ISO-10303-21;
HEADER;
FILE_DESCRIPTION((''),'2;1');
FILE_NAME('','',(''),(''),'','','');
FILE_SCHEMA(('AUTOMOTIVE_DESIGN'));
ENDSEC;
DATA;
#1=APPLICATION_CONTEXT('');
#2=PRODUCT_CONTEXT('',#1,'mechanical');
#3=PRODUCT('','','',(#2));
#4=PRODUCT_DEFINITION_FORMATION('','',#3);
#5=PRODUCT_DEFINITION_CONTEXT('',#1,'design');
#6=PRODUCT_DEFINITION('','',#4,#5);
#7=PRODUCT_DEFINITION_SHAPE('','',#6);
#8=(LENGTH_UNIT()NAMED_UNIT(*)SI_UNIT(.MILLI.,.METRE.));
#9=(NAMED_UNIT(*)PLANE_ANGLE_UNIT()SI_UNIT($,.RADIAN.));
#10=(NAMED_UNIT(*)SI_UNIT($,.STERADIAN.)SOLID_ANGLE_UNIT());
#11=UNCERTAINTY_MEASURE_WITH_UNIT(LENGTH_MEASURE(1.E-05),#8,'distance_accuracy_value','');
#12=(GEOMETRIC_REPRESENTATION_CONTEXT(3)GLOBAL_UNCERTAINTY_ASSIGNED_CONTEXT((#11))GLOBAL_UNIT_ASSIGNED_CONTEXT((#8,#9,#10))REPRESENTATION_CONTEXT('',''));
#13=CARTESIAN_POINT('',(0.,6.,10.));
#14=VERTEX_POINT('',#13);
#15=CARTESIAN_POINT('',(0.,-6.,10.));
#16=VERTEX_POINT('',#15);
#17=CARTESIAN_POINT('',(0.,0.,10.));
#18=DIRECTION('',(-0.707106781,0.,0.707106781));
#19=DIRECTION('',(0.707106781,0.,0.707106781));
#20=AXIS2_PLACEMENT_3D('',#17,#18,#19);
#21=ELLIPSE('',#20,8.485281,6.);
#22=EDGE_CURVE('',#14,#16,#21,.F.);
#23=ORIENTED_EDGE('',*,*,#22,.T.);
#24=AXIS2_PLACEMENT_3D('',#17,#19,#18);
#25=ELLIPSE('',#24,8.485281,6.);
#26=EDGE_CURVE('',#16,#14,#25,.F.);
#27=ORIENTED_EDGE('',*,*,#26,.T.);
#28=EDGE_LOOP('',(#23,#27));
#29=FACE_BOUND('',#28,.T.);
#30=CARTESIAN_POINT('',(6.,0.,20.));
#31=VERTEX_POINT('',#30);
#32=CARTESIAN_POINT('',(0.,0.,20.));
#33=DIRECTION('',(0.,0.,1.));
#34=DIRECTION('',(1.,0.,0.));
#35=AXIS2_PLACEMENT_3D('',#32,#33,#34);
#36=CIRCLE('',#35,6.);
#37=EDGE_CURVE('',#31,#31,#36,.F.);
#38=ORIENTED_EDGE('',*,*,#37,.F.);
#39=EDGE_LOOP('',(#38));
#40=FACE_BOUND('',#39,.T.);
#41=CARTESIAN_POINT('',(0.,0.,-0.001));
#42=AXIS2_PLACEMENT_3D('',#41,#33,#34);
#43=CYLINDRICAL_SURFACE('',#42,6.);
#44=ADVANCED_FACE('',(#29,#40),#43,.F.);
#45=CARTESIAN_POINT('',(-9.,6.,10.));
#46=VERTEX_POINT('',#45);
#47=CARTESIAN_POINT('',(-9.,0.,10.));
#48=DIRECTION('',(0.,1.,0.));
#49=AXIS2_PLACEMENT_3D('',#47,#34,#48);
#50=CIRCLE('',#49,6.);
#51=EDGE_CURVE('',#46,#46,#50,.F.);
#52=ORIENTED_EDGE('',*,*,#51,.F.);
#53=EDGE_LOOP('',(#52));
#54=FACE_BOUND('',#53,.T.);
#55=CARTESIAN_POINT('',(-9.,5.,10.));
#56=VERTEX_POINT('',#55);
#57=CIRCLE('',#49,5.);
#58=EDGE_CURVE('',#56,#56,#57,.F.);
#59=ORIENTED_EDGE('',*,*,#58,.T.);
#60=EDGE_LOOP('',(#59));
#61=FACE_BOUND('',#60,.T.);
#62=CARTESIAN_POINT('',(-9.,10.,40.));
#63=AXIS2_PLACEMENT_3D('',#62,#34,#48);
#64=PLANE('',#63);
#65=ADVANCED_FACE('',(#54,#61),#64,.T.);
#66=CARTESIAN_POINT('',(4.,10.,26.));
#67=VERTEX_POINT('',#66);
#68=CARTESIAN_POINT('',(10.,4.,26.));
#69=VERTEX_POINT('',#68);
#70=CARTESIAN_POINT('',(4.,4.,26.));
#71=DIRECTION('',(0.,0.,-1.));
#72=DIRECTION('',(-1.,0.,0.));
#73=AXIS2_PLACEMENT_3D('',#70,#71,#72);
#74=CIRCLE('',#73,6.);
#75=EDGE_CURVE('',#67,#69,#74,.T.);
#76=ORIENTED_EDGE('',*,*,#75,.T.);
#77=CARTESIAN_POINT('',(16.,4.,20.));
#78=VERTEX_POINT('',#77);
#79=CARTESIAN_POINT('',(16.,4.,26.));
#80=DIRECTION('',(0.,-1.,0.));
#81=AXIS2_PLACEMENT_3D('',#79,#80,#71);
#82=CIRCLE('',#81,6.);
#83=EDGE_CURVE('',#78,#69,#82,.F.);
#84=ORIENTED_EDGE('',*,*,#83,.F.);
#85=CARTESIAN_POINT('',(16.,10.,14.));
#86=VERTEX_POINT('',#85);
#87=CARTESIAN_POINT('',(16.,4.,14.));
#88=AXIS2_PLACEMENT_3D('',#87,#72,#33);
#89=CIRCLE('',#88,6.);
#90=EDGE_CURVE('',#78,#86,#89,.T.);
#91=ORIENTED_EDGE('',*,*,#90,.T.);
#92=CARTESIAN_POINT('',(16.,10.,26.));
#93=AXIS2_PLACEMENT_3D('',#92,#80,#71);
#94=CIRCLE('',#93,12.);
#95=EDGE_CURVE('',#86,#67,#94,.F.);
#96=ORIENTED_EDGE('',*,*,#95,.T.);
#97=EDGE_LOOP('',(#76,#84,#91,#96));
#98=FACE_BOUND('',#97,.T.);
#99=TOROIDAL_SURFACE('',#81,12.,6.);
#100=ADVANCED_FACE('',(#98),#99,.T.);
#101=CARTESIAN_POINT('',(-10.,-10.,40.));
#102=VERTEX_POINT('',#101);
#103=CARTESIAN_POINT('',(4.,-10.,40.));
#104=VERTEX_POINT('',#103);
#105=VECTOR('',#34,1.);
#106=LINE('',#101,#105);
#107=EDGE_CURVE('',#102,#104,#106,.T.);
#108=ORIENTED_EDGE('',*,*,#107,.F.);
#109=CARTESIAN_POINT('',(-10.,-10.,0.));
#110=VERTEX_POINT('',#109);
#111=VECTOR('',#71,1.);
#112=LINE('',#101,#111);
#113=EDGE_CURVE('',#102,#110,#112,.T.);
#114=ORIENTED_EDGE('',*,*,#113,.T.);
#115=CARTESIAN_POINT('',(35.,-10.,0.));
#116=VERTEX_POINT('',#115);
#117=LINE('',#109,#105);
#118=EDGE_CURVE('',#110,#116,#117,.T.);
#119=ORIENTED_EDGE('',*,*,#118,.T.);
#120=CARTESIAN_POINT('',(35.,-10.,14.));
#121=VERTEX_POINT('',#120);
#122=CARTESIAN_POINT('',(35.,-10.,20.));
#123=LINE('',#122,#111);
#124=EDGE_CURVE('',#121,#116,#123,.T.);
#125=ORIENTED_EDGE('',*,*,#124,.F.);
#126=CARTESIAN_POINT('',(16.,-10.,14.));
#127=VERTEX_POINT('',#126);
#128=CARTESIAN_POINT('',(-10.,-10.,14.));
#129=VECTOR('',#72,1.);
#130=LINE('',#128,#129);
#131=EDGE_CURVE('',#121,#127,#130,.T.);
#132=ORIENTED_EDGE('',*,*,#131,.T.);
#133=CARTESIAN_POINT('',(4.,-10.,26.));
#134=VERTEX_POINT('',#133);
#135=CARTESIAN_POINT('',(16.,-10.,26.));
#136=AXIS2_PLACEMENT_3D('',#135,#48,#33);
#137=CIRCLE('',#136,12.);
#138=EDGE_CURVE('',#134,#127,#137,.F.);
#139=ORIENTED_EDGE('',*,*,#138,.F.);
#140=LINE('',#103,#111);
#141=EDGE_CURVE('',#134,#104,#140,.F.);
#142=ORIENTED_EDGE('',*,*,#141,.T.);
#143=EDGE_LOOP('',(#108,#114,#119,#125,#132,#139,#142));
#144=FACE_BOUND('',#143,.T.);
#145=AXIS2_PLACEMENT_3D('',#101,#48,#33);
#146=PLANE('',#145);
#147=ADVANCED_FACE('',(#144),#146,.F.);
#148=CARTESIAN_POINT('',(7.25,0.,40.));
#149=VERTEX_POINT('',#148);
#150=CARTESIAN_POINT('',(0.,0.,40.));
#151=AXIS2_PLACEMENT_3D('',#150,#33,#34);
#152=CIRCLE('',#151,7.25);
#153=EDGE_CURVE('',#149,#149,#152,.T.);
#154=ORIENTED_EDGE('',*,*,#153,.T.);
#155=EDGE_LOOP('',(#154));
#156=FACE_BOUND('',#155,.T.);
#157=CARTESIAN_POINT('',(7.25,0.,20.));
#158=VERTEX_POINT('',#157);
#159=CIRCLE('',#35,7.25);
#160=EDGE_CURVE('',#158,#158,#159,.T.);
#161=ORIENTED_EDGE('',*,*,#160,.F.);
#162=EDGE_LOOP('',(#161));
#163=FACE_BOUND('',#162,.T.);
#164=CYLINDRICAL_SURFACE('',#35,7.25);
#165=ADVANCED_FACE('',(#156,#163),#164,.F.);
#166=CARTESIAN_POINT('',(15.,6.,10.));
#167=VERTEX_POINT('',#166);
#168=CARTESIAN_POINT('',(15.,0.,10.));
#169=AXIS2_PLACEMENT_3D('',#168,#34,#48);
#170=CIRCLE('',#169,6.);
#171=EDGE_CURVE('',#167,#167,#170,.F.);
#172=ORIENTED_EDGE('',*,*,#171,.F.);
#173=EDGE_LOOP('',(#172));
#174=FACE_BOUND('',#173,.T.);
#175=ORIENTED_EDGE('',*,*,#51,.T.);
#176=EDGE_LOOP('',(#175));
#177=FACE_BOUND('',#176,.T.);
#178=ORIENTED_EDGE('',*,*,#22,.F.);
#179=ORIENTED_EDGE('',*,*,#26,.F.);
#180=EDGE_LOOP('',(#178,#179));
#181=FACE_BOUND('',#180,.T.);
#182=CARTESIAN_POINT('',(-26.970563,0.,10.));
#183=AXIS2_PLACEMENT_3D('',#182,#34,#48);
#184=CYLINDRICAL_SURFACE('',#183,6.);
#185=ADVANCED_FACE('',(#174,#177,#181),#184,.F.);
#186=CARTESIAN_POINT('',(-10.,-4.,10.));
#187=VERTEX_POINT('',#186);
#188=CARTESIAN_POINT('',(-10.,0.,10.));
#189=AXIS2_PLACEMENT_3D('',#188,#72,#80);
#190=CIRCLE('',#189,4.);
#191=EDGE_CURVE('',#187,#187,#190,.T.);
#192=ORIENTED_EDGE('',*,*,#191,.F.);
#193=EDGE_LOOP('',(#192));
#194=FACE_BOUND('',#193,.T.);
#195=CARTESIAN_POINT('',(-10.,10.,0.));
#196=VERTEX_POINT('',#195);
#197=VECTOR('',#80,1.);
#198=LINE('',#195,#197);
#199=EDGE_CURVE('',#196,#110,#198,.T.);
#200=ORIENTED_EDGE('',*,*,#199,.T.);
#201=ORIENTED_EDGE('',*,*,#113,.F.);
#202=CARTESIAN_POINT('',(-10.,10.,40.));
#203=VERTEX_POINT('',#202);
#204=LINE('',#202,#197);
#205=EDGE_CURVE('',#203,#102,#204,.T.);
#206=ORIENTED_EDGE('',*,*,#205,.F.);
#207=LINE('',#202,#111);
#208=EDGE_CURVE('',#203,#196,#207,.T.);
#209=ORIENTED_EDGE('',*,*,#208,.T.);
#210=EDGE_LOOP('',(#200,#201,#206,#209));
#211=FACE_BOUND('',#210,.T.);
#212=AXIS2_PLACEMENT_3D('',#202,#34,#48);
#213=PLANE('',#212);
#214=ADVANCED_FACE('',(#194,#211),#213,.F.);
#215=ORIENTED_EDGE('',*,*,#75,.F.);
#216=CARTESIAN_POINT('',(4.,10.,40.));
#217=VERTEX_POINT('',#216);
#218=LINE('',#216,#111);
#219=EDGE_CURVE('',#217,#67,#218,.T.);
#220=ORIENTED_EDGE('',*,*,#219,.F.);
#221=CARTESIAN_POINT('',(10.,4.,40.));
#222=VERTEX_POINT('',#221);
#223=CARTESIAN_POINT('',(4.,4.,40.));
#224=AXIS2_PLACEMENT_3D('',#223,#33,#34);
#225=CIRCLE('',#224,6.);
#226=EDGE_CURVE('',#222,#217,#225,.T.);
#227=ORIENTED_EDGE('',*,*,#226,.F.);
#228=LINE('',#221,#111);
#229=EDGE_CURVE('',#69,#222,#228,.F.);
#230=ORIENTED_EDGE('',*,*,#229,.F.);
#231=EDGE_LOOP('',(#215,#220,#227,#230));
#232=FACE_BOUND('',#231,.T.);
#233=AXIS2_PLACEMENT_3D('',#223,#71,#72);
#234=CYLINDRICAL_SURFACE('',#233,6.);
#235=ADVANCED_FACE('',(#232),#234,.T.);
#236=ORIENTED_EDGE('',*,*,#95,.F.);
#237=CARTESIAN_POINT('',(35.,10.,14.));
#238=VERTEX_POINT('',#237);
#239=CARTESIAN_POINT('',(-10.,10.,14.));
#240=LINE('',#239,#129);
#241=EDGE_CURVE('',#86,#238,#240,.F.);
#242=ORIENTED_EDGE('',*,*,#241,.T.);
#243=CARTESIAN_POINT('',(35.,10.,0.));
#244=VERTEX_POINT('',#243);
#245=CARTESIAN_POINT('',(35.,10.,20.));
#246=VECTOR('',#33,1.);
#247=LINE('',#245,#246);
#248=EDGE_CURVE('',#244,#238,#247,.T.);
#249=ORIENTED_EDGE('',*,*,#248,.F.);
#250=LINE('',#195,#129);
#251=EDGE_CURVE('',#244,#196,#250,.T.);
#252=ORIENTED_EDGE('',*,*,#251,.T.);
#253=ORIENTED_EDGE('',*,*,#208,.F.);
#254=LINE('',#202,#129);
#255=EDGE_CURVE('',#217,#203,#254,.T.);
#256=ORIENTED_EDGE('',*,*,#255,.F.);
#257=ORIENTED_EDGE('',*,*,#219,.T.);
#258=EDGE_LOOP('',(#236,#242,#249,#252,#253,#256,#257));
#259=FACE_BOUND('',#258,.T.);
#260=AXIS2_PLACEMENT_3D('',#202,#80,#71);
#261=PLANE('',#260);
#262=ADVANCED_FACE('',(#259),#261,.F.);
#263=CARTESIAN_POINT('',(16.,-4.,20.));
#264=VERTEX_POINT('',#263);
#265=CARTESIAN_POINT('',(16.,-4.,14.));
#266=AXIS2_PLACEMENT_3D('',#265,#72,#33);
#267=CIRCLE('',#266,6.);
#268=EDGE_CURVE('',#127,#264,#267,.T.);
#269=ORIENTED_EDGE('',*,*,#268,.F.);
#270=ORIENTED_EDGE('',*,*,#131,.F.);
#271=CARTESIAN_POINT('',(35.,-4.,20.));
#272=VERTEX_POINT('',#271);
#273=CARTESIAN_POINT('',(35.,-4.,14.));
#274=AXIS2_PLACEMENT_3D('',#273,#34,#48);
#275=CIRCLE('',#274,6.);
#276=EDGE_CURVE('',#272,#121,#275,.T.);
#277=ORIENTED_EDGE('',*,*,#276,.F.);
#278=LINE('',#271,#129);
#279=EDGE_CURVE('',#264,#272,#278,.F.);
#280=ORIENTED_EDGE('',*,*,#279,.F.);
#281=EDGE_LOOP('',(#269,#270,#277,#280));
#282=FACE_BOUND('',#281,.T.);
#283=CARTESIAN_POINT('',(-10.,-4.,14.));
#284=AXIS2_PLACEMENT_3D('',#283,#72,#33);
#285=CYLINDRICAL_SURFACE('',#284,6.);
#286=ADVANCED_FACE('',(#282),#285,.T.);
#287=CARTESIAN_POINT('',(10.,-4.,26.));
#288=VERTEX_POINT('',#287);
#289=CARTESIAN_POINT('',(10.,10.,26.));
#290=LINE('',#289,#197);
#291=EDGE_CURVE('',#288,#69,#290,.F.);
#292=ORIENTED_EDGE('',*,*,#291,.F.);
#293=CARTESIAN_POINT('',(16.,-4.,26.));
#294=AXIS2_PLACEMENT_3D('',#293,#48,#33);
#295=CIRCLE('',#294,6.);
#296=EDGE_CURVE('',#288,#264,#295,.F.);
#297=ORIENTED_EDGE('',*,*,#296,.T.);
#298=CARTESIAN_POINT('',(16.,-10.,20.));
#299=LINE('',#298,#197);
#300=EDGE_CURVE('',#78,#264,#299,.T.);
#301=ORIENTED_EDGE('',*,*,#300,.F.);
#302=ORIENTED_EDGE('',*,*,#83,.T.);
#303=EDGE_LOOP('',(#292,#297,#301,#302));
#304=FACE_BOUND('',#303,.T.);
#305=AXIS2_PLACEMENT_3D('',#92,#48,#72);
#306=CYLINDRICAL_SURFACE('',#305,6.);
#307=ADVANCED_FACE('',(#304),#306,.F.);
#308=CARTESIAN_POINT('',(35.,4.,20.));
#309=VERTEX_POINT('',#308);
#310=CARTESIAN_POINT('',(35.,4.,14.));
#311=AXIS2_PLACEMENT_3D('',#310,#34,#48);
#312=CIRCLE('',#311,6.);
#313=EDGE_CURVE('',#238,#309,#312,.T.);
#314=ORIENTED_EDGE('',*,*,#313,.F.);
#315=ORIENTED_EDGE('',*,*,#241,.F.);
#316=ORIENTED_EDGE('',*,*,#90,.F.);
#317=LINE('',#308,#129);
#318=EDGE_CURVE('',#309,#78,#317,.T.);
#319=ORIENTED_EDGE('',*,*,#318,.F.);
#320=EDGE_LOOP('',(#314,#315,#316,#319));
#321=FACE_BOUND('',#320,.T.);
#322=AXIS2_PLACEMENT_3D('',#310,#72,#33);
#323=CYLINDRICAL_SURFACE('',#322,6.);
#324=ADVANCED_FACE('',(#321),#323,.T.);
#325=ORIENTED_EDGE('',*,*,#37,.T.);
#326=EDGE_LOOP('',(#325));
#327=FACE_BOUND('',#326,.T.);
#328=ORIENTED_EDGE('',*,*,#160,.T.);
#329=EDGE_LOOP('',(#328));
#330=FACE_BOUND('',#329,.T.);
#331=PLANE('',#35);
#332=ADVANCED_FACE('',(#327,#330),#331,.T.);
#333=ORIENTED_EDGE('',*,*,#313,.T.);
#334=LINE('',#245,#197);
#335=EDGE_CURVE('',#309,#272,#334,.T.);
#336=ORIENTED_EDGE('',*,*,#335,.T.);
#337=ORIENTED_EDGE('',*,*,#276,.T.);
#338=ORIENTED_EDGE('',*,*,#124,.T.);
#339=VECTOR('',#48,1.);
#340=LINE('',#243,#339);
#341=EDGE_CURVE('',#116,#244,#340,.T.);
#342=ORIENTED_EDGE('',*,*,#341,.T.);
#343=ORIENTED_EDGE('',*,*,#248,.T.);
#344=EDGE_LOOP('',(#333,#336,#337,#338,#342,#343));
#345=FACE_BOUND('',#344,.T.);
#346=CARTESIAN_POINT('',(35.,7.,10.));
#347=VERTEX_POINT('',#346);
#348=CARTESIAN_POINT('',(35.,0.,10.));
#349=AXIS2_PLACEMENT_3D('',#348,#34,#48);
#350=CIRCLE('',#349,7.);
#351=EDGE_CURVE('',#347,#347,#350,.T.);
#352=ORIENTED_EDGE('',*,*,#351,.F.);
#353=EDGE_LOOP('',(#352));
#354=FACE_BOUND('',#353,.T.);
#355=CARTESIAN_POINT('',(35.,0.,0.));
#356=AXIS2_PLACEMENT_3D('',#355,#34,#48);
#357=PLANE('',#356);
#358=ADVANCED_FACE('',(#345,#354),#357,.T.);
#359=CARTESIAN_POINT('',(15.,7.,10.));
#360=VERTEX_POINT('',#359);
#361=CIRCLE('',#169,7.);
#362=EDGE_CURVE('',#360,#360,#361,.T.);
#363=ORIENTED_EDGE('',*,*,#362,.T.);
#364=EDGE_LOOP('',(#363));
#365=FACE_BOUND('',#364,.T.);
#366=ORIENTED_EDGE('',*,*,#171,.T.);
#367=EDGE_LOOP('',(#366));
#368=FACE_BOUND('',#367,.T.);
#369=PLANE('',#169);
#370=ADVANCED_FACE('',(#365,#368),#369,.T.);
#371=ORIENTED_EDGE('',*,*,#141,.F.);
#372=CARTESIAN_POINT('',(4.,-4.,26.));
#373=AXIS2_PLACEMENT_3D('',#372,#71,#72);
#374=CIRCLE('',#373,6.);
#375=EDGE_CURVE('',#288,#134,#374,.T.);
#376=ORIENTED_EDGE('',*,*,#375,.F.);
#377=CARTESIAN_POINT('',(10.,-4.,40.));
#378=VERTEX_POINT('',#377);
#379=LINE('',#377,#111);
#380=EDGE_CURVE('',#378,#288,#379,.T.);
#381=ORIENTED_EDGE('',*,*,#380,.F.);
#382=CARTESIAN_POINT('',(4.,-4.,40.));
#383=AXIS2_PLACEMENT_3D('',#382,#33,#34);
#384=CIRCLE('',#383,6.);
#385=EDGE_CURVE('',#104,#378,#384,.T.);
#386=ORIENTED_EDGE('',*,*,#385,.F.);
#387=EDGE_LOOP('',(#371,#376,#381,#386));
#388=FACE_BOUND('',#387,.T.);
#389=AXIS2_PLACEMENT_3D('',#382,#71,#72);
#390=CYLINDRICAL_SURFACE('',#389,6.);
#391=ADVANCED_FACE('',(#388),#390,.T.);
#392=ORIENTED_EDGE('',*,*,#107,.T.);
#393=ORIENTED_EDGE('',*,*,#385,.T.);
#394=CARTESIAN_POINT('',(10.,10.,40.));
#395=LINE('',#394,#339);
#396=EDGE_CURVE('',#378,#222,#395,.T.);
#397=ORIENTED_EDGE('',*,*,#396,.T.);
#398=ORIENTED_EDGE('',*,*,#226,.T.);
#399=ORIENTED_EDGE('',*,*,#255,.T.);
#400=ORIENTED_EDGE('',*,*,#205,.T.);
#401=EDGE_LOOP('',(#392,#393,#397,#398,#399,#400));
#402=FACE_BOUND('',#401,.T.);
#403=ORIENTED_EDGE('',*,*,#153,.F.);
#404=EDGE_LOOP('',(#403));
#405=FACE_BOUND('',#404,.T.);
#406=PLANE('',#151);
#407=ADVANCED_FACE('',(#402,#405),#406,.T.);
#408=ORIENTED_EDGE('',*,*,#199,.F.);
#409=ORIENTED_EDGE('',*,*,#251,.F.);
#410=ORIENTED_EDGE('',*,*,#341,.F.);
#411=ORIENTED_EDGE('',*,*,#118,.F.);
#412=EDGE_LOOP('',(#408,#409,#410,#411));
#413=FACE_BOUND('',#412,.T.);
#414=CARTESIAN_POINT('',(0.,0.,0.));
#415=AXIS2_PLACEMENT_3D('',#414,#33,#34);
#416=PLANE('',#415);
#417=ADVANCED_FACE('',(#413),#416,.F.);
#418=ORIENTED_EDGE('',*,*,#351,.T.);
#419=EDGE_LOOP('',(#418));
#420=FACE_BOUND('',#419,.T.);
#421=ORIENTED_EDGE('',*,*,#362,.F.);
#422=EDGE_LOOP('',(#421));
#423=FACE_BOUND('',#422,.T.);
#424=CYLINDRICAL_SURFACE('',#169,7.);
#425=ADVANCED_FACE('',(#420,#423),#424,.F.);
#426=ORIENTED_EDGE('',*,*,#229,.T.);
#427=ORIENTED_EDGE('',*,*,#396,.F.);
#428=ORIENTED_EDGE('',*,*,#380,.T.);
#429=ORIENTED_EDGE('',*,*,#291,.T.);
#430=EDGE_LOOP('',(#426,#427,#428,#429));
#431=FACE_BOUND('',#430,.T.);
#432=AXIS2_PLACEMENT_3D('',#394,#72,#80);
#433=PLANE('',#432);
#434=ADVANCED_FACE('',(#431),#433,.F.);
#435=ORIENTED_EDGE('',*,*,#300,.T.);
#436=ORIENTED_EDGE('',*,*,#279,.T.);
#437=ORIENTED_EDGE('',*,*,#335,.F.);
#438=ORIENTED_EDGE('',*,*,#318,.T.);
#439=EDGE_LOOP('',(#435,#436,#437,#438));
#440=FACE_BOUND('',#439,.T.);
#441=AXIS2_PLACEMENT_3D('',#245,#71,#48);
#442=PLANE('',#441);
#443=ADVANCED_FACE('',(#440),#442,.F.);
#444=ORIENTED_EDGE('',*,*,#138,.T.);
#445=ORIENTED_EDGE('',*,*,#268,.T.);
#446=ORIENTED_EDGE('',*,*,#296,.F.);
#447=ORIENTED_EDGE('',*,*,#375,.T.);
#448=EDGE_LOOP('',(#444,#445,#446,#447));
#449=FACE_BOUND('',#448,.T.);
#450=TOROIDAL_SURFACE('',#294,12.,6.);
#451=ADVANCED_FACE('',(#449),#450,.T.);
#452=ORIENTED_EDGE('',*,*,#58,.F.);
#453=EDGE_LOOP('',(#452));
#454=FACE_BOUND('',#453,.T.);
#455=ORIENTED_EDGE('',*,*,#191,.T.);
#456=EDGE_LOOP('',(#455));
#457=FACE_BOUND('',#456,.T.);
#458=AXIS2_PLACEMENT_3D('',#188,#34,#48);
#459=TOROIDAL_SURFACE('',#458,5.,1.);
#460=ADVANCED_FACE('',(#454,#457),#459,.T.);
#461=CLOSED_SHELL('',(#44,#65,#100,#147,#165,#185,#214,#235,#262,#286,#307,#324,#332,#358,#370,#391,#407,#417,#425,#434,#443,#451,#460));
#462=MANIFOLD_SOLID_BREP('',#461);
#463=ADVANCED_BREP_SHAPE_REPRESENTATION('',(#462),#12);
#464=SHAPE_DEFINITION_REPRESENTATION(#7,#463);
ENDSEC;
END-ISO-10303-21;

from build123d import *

# Parameters (mm, degrees)
SKETCH_2_W                 = 20
SKETCH_2_H                 = 20
EXTRUDE_482_DEPTH          = 40
SKETCH_4_W                 = 20
SKETCH_4_H                 = 20
EXTRUDE_639_DEPTH          = 25
SKETCH_7_R                 = 6
CUT_EXTRUDE_822_DEPTH      = 44
CUT_EXTRUDE_968_REACH      = 56.083
CUT_EXTRUDE_968_END_RADIUS = 6
SKETCH_8_R                 = 6
SKETCH_9_R                 = 7.25
CUT_EXTRUDE_1104_DEPTH     = 20
SKETCH_10_R                = 7
CUT_EXTRUDE_1247_DEPTH     = 20
CUT_EXTRUDE_1380_REACH     = 63.033
SKETCH_11_R                = 4
FILLET_2_R                 = 6
FILLET_5_R                 = 1


with BuildPart() as part:
    # Эскиз2 → Extrude 482 (new body)
    with BuildSketch(Plane.XY):
        Rectangle(SKETCH_2_W, SKETCH_2_H)
    extrude(amount=EXTRUDE_482_DEPTH)

    # Эскиз4 → Extrude 639 (add)
    with BuildSketch(Plane(origin=(10, 0, 0), x_dir=(0, 0, -1), z_dir=(1, 0, 0))):
        with Locations((-10, 0)):
            Rectangle(SKETCH_4_W, SKETCH_4_H)
    extrude(amount=EXTRUDE_639_DEPTH)

    # Эскиз7 → Cut-Extrude 822 (cut)
    with BuildSketch(Plane(origin=(35, 0, 0), x_dir=(0, 0, -1), z_dir=(1, 0, 0))):
        with Locations(Location((-10, 0, 0), (0, 0, 90))):
            Circle(SKETCH_7_R)
    extrude(amount=-CUT_EXTRUDE_822_DEPTH, mode=Mode.SUBTRACT)

    # Cut-Extrude 968: up to this cylinder (the profile starts outside it)
    cut_extrude_968_end = Plane(origin=(0, 0, 10), z_dir=(1, 0, 0)) * Cylinder(CUT_EXTRUDE_968_END_RADIUS, 125.166, mode=Mode.PRIVATE)
    # Эскиз8 → Cut-Extrude 968 (cut, up to the surface)
    with BuildSketch(Plane.XY.offset(40), mode=Mode.PRIVATE) as cut_extrude_968_sk1:
        Circle(SKETCH_8_R)
    cut_extrude_968_tool1 = extrude(cut_extrude_968_sk1.sketch, amount=-CUT_EXTRUDE_968_REACH, mode=Mode.PRIVATE) - cut_extrude_968_end
    add(cut_extrude_968_tool1.solids().sort_by_distance((0, 0, 40))[0], mode=Mode.SUBTRACT)

    # Эскиз9 → Cut-Extrude 1104 (cut)
    with BuildSketch(Plane.XY.offset(40)):
        Circle(SKETCH_9_R)
    extrude(amount=-CUT_EXTRUDE_1104_DEPTH, mode=Mode.SUBTRACT)

    # Эскиз10 → Cut-Extrude 1247 (cut)
    with BuildSketch(Plane(origin=(35, 0, 0), x_dir=(0, 0, -1), z_dir=(1, 0, 0))):
        with Locations(Location((-10, 0, 0), (0, 0, 90))):
            Circle(SKETCH_10_R)
    extrude(amount=-CUT_EXTRUDE_1247_DEPTH, mode=Mode.SUBTRACT)

    # Эскиз11 → Cut-Extrude 1380 (cut, up to next)
    with BuildSketch(Plane.ZY.offset(10), mode=Mode.PRIVATE) as cut_extrude_1380_sk1:
        with Locations(Location((10, 0, 0), (0, 0, 270))):
            Circle(SKETCH_11_R)
    cut_extrude_1380_tool1 = extrude(cut_extrude_1380_sk1.sketch, amount=-CUT_EXTRUDE_1380_REACH, mode=Mode.PRIVATE) & part.part
    add(cut_extrude_1380_tool1.solids().sort_by_distance((-10, 0, 10))[0], mode=Mode.SUBTRACT)

    # Скругление2
    fillet_2_edges = [part.edges().sort_by_distance(p)[0] for p in [
        (10, 0, 20),
        (22.5, 10, 20),
        (22.5, -10, 20),
        (10, -10, 30),
        (10, 10, 30),
    ]]
    fillet(fillet_2_edges, radius=FILLET_2_R)

    # Скругление5
    fillet_5_edges = [part.edges().sort_by_distance(p)[0] for p in [
        (-9, 4, 10),
    ]]
    fillet(fillet_5_edges, radius=FILLET_5_R - 0.0001)  # a hair under: the kernel refuses the full size


solid = part.part
